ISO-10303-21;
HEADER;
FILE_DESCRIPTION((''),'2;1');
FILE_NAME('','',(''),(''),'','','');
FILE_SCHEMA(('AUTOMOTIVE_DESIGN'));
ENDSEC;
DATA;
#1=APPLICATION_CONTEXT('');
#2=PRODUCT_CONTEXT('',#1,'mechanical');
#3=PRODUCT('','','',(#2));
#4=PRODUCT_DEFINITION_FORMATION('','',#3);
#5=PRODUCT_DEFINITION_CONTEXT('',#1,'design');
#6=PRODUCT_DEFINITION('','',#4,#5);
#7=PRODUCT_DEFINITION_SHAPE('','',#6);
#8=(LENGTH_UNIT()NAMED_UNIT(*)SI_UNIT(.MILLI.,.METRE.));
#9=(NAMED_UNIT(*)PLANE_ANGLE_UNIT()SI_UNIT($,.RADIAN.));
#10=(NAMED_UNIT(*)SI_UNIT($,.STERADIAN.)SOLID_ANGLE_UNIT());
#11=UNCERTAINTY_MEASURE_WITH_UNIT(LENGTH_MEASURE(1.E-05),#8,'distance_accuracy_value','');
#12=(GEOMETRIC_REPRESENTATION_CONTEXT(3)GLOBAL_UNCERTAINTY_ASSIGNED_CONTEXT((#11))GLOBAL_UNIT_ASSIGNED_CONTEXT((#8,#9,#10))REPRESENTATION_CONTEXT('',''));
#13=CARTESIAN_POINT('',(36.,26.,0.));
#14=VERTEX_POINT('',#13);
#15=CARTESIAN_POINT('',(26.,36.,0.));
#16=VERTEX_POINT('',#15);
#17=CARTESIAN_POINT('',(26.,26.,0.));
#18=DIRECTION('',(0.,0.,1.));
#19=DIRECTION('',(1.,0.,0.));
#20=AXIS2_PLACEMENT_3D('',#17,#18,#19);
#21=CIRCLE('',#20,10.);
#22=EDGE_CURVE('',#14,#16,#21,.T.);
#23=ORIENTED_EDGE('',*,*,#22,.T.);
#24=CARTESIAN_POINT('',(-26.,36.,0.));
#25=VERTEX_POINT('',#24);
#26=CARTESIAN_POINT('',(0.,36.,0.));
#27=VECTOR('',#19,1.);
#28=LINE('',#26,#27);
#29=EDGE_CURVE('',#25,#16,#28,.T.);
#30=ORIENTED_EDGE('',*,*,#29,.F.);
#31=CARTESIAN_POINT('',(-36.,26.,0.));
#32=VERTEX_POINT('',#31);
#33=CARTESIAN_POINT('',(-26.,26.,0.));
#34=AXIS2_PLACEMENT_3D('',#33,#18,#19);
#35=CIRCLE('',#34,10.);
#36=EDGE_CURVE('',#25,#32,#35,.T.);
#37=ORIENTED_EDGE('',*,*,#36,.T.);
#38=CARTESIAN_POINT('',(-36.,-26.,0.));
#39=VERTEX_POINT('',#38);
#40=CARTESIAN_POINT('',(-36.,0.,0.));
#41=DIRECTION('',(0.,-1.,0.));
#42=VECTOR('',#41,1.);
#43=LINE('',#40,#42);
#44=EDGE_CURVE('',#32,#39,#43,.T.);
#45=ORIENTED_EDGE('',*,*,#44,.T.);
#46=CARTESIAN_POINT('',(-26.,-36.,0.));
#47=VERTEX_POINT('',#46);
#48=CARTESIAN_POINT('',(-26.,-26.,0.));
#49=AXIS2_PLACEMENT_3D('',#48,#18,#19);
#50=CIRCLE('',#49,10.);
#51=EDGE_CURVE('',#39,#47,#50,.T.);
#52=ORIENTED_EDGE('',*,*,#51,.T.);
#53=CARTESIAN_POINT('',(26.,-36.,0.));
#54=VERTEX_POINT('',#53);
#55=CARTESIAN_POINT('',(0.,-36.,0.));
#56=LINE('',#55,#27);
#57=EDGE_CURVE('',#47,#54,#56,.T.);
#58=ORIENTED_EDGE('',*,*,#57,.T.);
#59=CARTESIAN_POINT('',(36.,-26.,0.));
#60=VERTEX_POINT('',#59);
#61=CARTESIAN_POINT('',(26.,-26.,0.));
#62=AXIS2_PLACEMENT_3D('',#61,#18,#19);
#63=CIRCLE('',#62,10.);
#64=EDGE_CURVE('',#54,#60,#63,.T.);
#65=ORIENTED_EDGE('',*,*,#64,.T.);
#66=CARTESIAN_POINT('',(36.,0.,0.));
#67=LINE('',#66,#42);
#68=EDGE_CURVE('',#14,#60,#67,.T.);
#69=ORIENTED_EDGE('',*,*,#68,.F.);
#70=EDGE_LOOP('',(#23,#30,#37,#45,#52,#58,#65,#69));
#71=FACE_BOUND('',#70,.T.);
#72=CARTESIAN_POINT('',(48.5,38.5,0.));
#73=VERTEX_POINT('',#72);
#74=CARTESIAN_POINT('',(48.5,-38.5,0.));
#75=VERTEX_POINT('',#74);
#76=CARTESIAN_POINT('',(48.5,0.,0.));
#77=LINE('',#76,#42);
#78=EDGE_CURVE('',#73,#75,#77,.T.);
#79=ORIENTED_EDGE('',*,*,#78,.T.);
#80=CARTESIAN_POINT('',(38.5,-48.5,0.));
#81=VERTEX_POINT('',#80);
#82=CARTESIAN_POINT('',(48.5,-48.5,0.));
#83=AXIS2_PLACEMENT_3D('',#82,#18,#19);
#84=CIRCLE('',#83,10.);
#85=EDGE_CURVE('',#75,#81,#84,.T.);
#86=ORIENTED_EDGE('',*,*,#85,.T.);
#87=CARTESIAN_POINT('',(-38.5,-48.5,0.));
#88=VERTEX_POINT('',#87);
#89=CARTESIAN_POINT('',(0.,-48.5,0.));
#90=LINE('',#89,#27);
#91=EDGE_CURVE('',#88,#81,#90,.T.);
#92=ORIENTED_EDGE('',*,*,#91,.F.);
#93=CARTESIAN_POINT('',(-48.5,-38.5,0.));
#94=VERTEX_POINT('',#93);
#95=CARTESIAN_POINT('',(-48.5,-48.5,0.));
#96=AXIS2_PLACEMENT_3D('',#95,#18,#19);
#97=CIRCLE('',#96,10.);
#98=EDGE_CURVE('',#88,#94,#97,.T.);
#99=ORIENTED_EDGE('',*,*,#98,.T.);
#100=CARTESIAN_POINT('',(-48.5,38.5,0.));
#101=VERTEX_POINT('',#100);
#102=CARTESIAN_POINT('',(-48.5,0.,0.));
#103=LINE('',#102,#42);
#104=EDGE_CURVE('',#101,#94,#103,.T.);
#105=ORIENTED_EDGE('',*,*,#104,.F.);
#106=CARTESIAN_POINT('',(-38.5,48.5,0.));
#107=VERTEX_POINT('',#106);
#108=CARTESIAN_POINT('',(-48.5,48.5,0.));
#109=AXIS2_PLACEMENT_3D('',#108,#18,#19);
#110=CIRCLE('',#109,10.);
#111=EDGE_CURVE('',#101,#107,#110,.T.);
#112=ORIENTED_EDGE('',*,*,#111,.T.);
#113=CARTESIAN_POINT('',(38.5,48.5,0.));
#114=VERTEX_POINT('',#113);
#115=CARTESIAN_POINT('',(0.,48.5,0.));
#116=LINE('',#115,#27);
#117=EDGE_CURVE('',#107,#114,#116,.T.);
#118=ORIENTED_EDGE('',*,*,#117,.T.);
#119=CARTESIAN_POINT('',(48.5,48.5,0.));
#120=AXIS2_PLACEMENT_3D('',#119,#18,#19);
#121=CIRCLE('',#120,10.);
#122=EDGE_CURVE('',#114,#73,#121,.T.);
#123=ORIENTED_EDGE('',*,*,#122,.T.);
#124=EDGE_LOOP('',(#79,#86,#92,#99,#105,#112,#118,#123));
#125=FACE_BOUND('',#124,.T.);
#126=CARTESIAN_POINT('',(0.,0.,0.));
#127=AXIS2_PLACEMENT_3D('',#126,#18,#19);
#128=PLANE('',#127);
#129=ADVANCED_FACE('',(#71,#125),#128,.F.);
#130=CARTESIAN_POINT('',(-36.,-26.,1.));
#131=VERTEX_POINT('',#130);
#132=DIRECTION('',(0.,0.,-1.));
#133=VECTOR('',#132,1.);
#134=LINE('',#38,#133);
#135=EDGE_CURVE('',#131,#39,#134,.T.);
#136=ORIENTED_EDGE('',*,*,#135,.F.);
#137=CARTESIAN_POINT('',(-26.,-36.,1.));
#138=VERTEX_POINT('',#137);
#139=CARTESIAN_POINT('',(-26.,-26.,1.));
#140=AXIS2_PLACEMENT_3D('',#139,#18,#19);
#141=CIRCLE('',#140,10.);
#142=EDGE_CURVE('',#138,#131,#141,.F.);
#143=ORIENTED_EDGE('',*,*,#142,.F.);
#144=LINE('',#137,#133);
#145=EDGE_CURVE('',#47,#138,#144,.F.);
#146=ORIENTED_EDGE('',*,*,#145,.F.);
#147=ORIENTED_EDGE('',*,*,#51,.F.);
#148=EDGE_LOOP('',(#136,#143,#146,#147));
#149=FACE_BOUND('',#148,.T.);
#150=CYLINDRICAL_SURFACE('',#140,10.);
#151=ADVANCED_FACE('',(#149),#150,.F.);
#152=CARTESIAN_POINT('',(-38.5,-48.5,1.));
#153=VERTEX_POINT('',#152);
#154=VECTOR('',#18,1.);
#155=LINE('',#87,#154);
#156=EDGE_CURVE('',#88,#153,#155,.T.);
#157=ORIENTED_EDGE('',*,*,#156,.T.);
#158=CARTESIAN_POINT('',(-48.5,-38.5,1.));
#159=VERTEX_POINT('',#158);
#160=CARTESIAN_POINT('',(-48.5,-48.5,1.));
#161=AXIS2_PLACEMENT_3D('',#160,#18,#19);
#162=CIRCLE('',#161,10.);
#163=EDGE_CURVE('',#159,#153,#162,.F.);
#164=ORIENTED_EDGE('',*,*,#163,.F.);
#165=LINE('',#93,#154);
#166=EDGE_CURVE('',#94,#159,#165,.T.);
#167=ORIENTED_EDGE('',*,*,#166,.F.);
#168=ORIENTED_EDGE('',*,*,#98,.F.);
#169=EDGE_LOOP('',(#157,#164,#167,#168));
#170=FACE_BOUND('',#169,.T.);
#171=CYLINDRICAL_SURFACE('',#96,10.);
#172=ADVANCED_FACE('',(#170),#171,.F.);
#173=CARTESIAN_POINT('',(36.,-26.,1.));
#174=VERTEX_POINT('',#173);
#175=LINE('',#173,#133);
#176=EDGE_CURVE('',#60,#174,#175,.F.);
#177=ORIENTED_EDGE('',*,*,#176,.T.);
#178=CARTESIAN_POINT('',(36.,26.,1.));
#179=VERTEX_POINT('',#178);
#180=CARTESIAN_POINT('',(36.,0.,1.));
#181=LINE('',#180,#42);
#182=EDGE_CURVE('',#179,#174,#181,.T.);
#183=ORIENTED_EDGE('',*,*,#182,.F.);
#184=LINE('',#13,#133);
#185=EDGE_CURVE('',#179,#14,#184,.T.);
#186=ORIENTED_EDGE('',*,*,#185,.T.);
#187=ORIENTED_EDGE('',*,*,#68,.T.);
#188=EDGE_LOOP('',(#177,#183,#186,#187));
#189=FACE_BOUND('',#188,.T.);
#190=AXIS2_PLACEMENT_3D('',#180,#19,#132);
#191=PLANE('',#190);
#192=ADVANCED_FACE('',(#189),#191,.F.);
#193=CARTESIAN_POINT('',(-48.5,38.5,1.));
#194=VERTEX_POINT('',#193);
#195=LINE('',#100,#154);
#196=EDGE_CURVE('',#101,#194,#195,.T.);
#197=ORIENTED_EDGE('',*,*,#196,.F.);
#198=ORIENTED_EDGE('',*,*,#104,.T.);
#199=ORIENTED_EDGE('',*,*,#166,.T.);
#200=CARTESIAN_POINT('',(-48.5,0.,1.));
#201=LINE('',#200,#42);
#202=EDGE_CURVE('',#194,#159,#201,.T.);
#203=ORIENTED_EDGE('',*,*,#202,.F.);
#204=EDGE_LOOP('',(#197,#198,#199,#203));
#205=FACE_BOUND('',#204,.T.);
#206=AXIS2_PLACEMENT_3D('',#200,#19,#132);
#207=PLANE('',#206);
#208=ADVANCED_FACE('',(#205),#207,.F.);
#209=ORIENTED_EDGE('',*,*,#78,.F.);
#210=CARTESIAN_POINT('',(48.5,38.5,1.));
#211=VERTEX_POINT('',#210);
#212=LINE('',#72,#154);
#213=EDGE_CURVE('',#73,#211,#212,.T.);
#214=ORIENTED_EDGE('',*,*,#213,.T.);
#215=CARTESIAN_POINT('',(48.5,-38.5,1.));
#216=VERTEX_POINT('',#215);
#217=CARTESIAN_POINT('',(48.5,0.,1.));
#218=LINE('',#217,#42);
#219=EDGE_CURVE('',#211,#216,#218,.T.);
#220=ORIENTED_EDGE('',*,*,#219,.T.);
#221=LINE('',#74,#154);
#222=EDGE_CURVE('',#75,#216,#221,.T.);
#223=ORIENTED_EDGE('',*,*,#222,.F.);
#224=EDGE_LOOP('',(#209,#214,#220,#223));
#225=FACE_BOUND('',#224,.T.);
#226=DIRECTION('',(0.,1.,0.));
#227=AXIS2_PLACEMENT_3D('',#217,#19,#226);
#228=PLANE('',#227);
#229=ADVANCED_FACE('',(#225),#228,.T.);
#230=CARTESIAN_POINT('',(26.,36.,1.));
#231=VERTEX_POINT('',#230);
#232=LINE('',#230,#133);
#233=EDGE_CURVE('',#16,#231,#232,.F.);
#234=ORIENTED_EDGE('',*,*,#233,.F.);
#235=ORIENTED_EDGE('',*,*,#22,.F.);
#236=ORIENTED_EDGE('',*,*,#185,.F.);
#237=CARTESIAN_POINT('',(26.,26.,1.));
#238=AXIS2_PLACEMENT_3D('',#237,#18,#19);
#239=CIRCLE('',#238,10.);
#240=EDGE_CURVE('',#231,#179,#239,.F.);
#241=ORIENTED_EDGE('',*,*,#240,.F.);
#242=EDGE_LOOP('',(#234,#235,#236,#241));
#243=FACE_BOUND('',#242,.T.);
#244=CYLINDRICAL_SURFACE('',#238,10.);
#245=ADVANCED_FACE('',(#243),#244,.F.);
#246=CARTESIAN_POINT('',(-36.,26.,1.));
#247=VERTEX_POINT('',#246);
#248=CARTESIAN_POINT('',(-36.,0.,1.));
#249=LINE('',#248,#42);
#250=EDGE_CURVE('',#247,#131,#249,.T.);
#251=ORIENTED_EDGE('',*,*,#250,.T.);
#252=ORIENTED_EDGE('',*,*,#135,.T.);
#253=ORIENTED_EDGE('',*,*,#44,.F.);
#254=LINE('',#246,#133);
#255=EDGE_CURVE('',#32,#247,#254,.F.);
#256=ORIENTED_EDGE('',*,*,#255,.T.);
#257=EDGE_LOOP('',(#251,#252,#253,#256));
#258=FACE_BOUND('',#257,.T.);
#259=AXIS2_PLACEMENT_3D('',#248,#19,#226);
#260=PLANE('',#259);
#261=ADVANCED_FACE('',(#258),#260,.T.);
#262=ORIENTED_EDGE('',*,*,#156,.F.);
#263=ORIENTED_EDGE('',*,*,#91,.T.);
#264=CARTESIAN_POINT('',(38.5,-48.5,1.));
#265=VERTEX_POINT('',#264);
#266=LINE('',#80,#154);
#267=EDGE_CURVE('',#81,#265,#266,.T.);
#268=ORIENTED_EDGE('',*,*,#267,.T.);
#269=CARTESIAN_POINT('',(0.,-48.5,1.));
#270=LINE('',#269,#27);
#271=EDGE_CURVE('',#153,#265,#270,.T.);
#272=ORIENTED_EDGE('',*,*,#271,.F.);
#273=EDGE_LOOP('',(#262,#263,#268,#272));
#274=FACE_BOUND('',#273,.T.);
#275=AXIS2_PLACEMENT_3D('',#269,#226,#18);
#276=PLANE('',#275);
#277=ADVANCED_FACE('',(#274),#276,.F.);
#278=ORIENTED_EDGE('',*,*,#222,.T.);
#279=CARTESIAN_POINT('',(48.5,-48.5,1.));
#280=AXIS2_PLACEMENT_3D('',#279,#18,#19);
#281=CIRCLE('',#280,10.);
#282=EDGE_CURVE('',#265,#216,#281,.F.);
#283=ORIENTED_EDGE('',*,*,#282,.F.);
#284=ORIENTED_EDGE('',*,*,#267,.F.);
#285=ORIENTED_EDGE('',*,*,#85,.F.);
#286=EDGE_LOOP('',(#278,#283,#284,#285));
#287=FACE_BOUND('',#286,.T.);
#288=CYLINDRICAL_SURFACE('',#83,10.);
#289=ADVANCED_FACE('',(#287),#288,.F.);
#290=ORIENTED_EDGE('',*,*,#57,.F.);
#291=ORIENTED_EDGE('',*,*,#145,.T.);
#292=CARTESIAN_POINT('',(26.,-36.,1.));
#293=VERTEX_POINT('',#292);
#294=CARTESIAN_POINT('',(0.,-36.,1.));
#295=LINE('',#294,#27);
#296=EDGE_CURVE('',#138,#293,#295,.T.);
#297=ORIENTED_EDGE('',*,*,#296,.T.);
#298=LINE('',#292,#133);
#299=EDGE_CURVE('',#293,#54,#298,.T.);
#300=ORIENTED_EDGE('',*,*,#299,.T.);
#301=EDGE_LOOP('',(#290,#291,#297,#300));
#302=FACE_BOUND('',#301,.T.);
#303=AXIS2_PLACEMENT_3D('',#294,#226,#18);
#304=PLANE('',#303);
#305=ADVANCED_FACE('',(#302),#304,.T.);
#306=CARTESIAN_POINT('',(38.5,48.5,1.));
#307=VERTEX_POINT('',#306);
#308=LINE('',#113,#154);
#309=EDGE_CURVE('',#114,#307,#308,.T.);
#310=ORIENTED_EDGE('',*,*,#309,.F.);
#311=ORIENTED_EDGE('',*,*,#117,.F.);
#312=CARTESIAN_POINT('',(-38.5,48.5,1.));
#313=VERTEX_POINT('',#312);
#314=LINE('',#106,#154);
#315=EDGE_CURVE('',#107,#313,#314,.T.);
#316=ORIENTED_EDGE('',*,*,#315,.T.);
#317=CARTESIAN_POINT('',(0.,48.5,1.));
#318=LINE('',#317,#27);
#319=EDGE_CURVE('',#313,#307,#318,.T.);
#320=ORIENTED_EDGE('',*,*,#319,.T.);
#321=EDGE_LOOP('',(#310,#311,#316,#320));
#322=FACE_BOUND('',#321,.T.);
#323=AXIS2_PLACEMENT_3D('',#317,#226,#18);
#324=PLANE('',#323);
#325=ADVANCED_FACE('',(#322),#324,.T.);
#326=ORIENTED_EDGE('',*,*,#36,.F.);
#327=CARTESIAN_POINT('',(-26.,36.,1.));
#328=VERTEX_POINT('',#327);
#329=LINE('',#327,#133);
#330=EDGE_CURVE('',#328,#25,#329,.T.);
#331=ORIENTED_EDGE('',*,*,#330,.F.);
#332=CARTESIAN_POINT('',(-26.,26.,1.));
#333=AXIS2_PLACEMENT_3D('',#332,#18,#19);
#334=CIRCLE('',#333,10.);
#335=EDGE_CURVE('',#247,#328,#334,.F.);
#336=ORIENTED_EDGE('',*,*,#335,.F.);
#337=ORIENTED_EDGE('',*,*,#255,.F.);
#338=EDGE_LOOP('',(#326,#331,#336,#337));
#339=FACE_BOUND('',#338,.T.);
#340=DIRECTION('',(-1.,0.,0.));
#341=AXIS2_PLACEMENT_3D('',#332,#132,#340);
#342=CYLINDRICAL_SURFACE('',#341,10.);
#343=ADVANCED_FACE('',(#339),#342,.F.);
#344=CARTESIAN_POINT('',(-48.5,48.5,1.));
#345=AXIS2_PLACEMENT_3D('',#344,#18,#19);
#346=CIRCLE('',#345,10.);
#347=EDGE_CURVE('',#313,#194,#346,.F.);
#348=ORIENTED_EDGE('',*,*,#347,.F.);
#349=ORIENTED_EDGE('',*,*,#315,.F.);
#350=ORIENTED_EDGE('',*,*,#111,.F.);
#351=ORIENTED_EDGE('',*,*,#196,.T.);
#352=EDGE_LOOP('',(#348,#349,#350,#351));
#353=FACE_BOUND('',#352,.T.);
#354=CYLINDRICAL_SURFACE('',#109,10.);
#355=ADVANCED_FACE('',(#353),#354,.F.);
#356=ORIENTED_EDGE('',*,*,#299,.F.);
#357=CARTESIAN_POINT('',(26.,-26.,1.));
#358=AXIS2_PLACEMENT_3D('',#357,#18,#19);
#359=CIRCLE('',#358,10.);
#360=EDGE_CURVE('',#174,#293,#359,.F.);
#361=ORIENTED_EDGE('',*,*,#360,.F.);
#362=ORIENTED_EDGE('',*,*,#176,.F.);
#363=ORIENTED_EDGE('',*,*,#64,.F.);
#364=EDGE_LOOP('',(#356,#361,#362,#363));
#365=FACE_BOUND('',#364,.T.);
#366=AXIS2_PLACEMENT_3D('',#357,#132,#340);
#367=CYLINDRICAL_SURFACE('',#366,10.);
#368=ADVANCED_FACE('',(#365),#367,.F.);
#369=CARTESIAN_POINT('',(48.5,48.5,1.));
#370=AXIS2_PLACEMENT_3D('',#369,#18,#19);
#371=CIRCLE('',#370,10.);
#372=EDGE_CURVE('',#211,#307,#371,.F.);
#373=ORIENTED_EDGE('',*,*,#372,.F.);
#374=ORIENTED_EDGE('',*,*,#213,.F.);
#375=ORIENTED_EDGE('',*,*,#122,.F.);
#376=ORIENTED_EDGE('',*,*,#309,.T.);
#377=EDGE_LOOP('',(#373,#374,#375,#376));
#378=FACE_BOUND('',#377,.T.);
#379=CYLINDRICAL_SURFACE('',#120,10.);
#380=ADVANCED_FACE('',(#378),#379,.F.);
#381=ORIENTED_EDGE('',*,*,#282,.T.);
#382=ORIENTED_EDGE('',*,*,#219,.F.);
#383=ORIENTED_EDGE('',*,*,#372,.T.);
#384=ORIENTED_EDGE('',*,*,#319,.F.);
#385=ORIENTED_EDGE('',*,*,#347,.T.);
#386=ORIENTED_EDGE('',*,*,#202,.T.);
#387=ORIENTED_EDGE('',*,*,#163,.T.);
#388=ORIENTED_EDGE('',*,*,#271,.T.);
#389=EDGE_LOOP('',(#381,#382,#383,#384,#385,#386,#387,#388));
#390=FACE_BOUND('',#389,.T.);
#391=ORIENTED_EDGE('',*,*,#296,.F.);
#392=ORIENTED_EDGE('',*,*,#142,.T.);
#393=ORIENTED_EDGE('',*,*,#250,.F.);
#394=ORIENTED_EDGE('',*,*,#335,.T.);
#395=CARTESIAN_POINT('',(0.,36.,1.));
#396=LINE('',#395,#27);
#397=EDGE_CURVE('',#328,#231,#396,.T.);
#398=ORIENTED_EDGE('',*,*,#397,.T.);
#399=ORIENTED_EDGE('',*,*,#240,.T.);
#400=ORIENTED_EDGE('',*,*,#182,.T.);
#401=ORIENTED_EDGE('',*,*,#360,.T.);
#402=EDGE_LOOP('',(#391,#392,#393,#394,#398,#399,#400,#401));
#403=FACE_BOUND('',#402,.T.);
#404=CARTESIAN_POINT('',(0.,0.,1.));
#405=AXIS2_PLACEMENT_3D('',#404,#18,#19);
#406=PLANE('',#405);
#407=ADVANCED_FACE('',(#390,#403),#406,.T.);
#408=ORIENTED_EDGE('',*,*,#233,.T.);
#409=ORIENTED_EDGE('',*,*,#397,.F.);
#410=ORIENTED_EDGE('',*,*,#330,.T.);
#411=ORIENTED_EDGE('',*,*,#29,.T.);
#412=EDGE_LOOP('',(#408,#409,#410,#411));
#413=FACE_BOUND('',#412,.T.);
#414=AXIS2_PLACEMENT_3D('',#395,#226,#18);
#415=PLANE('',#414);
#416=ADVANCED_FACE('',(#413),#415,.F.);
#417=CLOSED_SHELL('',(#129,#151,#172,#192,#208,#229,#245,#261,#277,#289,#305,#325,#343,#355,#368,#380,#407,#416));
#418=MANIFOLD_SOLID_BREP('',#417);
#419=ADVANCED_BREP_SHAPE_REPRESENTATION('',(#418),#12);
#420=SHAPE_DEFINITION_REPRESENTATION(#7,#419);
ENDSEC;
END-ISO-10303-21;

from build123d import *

# Parameters (mm, degrees)
SKETCH1_W           = 97
SKETCH1_H           = 97
SKETCH1_W_2         = 72
SKETCH1_H_2         = 72
BOSS_EXTRUDE1_DEPTH = 1
SKETCH2_W           = 10
SKETCH2_H           = 10
CUT_EXTRUDE1_DEPTH  = 69.596647148
FILLET1_R           = 10


with BuildPart() as part:
    # Sketch1 → Boss-Extrude1 (new body)
    with BuildSketch(Plane.XY):
        Rectangle(SKETCH1_W, SKETCH1_H)
        Rectangle(SKETCH1_W_2, SKETCH1_H_2, mode=Mode.SUBTRACT)
    extrude(amount=BOSS_EXTRUDE1_DEPTH)

    # Sketch2 → Cut-Extrude1 (cut, through all)
    with BuildSketch(Plane.XY.offset(1)):
        with Locations((-43.5, 43.5)):
            Rectangle(SKETCH2_W, SKETCH2_H)
        with Locations((43.5, 43.5)):
            Rectangle(SKETCH2_W, SKETCH2_H)
        with Locations((43.5, -43.5)):
            Rectangle(SKETCH2_W, SKETCH2_H)
        with Locations((-43.5, -43.5)):
            Rectangle(SKETCH2_W, SKETCH2_H)
    extrude(amount=-CUT_EXTRUDE1_DEPTH, mode=Mode.SUBTRACT)

    # Fillet1
    fillet1_edges = [part.edges().sort_by_distance(p)[0] for p in [
        (-36, -36, 0.5),
        (-38.5, -38.5, 0.5),
        (38.5, -38.5, 0.5),
        (36, -36, 0.5),
        (38.5, 38.5, 0.5),
        (36, 36, 0.5),
        (-38.5, 38.5, 0.5),
        (-36, 36, 0.5),
    ]]
    fillet(fillet1_edges, radius=FILLET1_R - 0.0001)  # a hair under: the kernel refuses the full size


solid = part.part
